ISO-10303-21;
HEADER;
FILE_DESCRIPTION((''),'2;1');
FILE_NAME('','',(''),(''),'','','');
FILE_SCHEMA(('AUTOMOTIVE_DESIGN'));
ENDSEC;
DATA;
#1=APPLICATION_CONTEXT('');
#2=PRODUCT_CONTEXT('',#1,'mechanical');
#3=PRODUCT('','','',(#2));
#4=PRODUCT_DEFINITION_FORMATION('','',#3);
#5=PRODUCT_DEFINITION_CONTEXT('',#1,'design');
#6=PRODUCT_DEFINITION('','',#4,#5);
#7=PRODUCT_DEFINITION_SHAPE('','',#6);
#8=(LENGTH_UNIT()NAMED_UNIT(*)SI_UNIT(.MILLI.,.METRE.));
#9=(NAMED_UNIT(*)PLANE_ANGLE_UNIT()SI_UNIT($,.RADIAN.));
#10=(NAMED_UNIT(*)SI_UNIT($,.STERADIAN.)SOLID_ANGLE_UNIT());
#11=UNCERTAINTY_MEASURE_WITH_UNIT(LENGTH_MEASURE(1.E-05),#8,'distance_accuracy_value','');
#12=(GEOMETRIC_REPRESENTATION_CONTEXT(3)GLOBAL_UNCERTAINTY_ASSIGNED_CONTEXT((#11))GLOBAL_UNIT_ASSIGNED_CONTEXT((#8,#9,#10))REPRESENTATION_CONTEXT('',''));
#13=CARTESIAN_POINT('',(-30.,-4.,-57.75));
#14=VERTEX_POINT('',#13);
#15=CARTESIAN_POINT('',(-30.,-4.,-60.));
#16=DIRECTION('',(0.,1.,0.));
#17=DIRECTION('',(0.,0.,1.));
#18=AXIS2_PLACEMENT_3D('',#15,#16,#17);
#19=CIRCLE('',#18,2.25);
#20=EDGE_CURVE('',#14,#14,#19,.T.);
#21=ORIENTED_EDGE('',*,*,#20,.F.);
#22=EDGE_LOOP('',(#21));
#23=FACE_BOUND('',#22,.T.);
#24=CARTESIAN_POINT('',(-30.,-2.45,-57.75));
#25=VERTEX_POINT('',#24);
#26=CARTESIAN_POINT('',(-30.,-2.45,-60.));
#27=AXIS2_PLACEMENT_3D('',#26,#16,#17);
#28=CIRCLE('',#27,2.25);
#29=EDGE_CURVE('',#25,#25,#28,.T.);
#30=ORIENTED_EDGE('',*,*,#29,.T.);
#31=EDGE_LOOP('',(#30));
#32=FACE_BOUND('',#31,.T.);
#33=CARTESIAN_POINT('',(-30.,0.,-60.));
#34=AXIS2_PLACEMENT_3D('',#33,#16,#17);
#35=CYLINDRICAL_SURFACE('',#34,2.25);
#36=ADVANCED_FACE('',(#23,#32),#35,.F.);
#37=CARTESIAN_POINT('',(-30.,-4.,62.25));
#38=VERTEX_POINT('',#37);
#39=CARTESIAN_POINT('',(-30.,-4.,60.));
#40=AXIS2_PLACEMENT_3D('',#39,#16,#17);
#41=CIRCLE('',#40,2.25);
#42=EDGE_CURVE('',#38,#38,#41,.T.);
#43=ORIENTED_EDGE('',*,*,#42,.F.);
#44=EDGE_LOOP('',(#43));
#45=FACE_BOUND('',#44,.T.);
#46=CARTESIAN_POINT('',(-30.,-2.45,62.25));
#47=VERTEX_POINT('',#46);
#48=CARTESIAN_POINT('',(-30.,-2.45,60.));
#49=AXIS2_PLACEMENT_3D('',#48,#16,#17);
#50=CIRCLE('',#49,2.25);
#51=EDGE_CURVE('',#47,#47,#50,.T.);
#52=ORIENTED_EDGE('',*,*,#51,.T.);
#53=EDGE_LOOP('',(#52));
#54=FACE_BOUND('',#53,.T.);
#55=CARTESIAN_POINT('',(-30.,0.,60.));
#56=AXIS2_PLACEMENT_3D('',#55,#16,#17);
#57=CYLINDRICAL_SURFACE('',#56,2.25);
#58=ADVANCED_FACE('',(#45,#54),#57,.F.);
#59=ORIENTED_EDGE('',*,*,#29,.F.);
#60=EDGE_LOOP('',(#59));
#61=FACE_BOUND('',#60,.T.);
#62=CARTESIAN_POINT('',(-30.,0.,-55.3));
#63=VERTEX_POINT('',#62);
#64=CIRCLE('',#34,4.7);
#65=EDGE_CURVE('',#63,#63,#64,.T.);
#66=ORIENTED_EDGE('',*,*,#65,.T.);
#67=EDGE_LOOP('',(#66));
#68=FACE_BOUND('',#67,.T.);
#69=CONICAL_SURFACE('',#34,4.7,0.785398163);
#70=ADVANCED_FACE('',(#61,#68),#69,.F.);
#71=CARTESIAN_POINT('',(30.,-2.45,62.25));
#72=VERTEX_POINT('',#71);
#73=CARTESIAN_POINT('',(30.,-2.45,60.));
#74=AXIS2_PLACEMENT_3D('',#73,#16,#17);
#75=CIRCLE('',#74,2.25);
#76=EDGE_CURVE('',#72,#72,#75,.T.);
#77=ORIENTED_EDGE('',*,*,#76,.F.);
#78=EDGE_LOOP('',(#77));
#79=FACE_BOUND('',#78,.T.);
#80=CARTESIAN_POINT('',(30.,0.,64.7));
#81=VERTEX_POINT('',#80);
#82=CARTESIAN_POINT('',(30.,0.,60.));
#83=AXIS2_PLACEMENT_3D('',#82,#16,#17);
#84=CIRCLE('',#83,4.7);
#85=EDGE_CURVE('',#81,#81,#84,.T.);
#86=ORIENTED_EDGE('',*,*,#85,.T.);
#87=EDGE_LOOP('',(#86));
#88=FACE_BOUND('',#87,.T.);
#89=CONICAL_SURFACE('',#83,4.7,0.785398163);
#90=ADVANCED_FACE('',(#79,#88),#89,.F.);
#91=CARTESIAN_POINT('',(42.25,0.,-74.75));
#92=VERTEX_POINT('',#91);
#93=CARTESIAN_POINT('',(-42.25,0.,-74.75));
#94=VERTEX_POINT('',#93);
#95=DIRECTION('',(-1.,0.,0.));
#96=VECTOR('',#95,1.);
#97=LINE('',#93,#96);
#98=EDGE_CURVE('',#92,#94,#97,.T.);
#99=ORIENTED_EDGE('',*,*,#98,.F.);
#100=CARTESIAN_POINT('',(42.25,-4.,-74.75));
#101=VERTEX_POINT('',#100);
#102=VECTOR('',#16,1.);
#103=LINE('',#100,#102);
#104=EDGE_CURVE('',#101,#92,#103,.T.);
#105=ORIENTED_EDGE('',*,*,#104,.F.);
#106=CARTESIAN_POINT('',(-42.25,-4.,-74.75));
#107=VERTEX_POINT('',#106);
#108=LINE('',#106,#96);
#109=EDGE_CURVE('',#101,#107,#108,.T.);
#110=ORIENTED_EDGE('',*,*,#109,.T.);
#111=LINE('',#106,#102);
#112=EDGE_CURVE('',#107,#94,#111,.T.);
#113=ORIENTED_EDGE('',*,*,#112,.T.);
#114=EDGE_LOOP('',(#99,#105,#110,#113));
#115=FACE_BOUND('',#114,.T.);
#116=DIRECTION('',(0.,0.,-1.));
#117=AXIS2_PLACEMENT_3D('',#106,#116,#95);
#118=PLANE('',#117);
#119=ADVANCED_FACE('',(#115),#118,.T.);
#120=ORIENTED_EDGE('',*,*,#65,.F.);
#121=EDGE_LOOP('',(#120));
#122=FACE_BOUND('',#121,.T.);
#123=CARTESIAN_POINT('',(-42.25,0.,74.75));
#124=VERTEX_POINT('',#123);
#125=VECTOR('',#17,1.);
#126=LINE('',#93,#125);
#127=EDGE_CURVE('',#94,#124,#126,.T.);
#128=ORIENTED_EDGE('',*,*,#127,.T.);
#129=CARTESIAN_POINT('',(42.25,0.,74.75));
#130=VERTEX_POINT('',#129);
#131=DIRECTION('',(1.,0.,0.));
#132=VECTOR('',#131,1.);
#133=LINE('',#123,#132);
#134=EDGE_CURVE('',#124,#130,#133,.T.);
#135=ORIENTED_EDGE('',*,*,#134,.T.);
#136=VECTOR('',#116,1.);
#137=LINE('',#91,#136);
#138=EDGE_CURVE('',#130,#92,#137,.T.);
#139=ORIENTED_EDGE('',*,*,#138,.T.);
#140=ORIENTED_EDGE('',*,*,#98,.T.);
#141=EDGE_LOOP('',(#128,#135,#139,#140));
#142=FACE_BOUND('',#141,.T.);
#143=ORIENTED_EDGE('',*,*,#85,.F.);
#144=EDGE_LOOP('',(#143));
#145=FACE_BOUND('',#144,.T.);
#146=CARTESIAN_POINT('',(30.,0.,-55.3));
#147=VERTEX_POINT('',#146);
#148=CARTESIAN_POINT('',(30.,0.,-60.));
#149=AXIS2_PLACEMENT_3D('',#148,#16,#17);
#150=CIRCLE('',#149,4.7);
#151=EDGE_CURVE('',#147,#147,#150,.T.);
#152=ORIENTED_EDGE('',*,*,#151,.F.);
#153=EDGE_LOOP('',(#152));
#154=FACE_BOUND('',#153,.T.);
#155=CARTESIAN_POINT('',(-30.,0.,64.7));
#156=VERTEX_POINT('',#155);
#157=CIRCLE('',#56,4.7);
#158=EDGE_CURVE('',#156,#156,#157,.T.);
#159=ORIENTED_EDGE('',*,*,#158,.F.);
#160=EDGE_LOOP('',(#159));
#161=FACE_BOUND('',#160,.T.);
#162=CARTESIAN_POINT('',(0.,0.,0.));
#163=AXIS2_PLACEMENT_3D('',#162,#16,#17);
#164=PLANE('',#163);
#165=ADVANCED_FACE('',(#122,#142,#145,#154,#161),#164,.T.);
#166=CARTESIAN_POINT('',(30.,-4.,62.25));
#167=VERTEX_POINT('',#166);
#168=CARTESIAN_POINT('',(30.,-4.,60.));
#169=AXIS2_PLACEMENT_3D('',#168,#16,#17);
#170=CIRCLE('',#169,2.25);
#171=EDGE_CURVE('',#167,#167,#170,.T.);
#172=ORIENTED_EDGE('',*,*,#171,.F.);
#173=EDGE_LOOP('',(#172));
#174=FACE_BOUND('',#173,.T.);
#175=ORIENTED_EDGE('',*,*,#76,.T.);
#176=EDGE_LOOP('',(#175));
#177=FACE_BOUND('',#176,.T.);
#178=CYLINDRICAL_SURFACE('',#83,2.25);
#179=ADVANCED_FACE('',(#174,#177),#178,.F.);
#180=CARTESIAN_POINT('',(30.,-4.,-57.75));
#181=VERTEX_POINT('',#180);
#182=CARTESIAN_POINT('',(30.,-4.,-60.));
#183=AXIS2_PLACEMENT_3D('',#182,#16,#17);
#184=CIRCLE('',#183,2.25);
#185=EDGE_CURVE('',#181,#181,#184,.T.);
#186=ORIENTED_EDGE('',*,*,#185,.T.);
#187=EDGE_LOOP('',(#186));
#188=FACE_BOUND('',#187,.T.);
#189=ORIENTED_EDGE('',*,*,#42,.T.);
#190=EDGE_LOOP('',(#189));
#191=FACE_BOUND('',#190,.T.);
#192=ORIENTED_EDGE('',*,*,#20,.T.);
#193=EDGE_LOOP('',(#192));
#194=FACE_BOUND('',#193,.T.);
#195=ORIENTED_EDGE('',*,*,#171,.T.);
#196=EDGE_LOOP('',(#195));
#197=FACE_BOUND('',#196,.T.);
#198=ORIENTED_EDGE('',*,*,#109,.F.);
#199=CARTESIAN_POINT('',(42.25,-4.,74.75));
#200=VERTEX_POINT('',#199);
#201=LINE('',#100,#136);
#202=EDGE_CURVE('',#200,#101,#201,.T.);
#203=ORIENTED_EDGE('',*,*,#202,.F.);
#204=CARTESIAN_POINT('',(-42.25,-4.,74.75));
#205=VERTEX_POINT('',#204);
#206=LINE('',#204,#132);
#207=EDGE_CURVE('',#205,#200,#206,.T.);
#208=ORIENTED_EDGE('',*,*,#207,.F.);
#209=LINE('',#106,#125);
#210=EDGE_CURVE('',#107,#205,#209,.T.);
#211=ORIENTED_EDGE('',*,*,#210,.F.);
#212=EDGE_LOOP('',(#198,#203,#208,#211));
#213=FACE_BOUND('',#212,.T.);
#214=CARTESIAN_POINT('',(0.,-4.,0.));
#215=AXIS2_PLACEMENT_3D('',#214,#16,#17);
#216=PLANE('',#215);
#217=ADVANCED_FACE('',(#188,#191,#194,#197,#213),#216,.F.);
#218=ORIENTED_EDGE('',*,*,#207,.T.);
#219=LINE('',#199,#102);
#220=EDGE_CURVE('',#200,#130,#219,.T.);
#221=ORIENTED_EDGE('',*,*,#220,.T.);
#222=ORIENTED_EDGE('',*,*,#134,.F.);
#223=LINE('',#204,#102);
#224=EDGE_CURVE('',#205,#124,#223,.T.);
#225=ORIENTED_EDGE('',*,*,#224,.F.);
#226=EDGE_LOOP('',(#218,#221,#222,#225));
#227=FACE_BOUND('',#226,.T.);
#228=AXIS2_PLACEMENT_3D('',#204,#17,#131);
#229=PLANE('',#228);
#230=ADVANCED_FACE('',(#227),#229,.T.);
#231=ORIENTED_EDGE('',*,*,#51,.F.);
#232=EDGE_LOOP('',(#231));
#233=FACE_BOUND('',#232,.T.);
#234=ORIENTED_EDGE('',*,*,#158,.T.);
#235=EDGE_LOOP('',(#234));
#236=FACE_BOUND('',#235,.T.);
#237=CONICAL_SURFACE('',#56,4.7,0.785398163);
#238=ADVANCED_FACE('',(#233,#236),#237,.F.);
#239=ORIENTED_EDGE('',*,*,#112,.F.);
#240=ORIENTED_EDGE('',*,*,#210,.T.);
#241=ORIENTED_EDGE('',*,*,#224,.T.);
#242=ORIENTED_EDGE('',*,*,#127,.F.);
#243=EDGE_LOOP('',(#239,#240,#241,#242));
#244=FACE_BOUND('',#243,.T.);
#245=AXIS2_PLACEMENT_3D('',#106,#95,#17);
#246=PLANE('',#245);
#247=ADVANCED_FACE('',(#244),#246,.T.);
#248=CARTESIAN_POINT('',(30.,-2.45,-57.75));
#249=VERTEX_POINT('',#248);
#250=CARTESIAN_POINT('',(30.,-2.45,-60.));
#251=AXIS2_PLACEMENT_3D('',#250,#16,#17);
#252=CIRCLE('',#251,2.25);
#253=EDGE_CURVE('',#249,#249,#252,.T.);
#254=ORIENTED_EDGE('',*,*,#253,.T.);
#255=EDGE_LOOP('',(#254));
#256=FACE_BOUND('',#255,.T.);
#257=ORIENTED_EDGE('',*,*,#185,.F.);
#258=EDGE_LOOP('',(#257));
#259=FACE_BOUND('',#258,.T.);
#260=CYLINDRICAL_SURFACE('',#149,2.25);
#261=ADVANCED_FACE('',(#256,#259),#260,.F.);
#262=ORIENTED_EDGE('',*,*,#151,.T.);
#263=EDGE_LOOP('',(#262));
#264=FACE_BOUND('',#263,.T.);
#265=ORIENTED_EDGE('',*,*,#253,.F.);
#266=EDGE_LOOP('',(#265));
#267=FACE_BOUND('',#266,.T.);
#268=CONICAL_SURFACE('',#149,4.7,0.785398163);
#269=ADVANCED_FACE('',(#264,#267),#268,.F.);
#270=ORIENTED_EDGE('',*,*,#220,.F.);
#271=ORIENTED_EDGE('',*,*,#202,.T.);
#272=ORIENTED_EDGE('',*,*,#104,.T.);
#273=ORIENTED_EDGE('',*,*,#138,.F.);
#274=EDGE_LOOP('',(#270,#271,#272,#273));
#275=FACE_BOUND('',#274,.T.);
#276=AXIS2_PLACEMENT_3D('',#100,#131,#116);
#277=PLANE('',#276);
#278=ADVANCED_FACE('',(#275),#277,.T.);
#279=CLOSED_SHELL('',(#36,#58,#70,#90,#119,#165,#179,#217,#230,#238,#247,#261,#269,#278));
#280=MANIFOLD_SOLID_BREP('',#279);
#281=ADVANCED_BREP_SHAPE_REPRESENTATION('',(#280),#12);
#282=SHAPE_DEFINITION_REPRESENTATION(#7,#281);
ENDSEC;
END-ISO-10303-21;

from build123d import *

# Parameters (mm, degrees)
SKETCH1_W                                      = 84.5
SKETCH1_H                                      = 149.5
BASE_FLANGE1_DEPTH                             = 4
CSK_FOR_M4_FLAT_HEAD_MACHINE_SCREW1_AT_2_COUNT = 2
CSK_FOR_M4_FLAT_HEAD_MACHINE_SCREW1_AT_2_PITCH = 60
CSK_FOR_M4_FLAT_HEAD_MACHINE_SCREW1_AT_3_COUNT = 2
CSK_FOR_M4_FLAT_HEAD_MACHINE_SCREW1_AT_3_PITCH = 134.16407865
CSK_FOR_M4_FLAT_HEAD_MACHINE_SCREW1_AT_4_COUNT = 2
CSK_FOR_M4_FLAT_HEAD_MACHINE_SCREW1_AT_4_PITCH = 120


# Sheet-metal steps are written as plain solids
with BuildPart() as part:
    # Sketch1 → Base-Flange1 (new body)
    with BuildSketch(Plane(origin=(0, 0, 0), x_dir=(1, 0, 0), z_dir=(0, 1, 0))):
        Rectangle(SKETCH1_W, SKETCH1_H)
    extrude(amount=-BASE_FLANGE1_DEPTH)

    # Sketch5 → CSK for M4 Flat Head Machine Screw1 (revolve, cut)
    with BuildSketch(Plane(origin=(30, 0, -60), x_dir=(0, 0, 1), z_dir=(1, 0, 0))):
        Polygon((0, 0), (0, 4), (2.25, 4), (2.25, 2.45), (4.7, 0), align=None)
    csk_for_m4_flat_head_machine_screw1 = revolve(axis=Axis((30, 6.35, -60), (0, -1, 0)), mode=Mode.SUBTRACT)

    # CSK for M4 Flat Head Machine Screw1 at 2: CSK for M4 Flat Head Machine Screw1 ×2
    with Locations(*[(-i * CSK_FOR_M4_FLAT_HEAD_MACHINE_SCREW1_AT_2_PITCH, 0, 0) for i in range(1, CSK_FOR_M4_FLAT_HEAD_MACHINE_SCREW1_AT_2_COUNT)]):
        add(csk_for_m4_flat_head_machine_screw1, mode=Mode.SUBTRACT)

    # CSK for M4 Flat Head Machine Screw1 at 3: CSK for M4 Flat Head Machine Screw1 ×2
    with Locations(*[Vector(-0.44721359549995787, 0, 0.894427190999916) * (i * CSK_FOR_M4_FLAT_HEAD_MACHINE_SCREW1_AT_3_PITCH) for i in range(1, CSK_FOR_M4_FLAT_HEAD_MACHINE_SCREW1_AT_3_COUNT)]):
        add(csk_for_m4_flat_head_machine_screw1, mode=Mode.SUBTRACT)

    # CSK for M4 Flat Head Machine Screw1 at 4: CSK for M4 Flat Head Machine Screw1 ×2
    with Locations(*[(0, 0, i * CSK_FOR_M4_FLAT_HEAD_MACHINE_SCREW1_AT_4_PITCH) for i in range(1, CSK_FOR_M4_FLAT_HEAD_MACHINE_SCREW1_AT_4_COUNT)]):
        add(csk_for_m4_flat_head_machine_screw1, mode=Mode.SUBTRACT)


solid = part.part
